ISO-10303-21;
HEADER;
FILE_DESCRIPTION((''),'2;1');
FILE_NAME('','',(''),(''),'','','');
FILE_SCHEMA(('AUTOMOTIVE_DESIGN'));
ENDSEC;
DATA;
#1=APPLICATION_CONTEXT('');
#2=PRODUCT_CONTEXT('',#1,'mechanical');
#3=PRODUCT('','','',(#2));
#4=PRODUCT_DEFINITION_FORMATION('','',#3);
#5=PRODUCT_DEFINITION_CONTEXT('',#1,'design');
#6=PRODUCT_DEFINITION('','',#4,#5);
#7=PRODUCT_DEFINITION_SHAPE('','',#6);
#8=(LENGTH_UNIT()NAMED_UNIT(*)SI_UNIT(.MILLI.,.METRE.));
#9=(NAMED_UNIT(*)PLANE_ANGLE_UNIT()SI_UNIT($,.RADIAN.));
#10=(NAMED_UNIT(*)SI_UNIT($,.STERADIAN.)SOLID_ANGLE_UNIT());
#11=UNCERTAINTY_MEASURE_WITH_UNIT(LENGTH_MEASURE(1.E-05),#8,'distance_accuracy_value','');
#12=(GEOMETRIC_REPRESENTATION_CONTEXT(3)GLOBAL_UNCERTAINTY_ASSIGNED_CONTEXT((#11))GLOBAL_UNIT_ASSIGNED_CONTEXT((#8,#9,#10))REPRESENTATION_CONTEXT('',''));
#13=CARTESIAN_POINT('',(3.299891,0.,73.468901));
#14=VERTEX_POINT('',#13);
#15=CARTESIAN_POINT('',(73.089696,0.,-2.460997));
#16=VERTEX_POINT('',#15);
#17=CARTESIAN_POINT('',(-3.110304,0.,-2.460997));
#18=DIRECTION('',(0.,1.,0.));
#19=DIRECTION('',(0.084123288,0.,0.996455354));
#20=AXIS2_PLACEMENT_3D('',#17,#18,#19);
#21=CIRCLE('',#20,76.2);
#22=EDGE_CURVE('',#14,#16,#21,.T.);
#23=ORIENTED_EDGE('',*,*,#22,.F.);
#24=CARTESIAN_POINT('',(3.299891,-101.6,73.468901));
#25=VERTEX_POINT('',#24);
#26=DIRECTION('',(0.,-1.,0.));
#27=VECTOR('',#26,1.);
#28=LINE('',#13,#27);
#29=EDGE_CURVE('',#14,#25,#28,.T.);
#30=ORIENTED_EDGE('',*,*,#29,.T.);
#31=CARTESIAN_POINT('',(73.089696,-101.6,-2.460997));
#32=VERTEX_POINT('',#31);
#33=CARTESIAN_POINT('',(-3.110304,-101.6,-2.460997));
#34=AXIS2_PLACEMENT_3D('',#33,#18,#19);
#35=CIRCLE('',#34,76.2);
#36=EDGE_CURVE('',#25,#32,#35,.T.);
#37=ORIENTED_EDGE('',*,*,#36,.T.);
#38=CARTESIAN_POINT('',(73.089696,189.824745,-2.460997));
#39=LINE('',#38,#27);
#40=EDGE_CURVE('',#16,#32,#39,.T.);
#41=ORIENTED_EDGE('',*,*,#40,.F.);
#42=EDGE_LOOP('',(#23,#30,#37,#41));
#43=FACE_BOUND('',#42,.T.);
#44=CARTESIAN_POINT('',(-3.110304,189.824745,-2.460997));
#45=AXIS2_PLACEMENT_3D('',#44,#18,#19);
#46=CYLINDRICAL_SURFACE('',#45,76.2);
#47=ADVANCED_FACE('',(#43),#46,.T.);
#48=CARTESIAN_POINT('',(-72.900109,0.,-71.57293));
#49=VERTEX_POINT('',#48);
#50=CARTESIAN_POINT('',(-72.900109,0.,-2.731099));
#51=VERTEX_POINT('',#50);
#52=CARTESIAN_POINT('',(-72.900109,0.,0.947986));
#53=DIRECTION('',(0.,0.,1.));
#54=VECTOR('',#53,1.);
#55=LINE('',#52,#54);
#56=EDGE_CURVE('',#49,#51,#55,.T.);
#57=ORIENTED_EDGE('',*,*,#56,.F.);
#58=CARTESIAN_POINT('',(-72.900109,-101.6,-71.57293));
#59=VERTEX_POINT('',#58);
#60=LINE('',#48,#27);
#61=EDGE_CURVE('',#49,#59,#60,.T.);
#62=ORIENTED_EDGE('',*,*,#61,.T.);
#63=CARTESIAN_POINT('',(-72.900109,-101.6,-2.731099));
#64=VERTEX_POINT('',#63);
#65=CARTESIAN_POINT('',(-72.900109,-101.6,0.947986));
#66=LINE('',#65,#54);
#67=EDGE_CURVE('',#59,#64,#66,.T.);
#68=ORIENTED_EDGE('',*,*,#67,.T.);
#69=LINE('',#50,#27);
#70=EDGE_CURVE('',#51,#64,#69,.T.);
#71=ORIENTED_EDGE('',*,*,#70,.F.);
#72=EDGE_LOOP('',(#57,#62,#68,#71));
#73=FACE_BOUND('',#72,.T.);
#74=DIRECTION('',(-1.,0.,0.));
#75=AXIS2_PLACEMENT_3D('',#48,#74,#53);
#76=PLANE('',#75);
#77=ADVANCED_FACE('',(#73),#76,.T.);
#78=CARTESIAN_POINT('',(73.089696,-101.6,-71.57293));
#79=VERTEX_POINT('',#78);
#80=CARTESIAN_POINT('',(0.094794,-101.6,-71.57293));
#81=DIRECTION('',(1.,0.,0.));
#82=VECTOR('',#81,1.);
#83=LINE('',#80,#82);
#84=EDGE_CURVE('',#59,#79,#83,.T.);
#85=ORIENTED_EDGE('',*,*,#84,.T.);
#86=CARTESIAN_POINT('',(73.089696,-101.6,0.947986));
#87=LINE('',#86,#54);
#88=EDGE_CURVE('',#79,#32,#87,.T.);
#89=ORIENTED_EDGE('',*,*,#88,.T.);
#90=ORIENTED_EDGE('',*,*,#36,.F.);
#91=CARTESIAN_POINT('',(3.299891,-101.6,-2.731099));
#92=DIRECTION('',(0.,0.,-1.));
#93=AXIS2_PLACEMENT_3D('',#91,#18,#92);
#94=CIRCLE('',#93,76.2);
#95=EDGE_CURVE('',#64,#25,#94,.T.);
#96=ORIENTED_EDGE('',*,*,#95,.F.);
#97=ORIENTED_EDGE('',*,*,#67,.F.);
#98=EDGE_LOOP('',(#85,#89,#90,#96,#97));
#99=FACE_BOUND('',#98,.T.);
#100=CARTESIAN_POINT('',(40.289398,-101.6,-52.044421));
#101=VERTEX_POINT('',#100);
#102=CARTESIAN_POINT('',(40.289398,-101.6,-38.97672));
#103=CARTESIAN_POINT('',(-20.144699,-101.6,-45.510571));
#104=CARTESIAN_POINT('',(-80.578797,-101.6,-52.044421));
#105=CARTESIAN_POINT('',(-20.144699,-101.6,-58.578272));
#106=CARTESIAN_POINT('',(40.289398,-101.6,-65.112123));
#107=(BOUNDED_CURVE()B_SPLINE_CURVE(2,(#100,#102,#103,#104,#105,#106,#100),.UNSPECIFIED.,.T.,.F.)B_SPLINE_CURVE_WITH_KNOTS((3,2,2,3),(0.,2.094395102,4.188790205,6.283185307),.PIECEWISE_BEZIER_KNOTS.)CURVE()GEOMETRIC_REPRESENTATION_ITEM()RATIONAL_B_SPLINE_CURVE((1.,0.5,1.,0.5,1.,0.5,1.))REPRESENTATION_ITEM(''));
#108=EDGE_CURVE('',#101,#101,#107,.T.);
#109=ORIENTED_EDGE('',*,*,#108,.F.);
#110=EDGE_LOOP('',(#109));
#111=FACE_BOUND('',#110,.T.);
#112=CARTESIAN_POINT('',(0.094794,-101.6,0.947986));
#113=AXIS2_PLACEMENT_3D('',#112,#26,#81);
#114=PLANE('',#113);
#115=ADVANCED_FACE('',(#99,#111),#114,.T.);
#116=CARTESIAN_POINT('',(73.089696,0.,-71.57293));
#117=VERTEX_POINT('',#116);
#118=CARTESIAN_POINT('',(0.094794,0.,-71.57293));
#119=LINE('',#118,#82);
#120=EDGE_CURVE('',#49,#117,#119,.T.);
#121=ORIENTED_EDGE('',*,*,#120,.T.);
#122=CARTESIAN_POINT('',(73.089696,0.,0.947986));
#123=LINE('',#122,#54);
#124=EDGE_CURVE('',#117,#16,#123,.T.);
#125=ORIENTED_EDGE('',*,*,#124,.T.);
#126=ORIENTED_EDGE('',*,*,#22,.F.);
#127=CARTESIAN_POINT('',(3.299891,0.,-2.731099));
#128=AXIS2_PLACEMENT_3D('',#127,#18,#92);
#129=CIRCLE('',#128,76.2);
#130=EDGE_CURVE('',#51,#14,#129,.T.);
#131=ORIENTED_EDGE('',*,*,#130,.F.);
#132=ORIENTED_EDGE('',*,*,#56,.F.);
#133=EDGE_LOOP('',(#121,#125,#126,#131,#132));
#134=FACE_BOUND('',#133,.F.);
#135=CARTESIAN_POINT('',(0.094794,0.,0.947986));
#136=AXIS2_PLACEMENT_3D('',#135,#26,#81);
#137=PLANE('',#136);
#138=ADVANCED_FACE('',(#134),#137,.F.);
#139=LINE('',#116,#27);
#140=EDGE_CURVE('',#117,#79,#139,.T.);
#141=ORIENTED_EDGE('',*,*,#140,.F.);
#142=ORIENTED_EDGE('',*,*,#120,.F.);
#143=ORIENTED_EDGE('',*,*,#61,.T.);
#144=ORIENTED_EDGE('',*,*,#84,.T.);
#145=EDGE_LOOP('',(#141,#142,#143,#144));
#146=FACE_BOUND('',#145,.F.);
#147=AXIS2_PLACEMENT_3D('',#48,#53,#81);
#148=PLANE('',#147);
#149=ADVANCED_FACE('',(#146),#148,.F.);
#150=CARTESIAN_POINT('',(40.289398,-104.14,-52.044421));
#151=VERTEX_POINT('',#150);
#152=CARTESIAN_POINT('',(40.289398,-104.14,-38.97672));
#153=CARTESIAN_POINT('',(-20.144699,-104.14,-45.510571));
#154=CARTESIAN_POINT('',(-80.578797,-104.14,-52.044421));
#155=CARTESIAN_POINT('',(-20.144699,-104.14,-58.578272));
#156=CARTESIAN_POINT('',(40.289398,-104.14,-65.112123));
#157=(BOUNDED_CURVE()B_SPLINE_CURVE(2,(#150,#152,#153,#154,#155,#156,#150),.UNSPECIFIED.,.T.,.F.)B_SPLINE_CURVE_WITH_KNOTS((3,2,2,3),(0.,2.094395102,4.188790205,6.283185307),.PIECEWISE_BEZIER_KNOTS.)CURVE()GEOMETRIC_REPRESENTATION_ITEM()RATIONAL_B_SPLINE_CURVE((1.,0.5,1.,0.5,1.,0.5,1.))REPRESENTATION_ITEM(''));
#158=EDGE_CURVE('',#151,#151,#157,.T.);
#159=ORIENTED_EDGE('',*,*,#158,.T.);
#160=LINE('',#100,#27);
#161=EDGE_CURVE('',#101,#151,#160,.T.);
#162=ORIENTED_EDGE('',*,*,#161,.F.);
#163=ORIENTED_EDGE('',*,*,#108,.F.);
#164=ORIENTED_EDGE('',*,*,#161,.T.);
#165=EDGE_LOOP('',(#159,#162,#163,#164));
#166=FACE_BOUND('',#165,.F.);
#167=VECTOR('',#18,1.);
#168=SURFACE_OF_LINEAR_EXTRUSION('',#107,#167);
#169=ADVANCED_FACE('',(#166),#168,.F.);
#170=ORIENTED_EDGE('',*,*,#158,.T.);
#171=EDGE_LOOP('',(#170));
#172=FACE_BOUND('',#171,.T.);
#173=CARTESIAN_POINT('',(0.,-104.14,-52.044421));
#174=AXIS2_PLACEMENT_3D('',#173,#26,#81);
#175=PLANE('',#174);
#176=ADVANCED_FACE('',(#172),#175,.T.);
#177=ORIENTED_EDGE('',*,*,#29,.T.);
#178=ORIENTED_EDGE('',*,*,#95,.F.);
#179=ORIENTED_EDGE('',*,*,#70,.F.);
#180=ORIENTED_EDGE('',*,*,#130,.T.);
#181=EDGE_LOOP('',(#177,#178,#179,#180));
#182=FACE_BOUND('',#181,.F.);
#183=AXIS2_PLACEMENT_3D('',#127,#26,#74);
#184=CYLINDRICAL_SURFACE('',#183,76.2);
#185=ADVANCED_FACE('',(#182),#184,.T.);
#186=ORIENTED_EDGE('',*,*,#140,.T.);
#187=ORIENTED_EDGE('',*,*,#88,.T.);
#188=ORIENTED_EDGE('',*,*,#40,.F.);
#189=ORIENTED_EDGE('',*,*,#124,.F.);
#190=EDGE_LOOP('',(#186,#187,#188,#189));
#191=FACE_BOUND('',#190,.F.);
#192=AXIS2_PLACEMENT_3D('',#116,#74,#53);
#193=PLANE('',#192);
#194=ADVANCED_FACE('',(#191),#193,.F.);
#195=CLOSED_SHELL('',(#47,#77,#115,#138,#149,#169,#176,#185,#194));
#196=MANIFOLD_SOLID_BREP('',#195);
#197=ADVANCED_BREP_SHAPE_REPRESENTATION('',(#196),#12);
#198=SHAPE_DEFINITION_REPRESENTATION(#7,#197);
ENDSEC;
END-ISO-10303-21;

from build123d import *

# Parameters (mm, degrees)
F0_W        = 145.98980546
F0_H        = 145.0418308377
F1_DEPTH    = 101.6
F2_R        = 76.2
F3_T1_DEPTH = 481.2494898574
F5_DEPTH    = 2.54


# Not quite as in the source:
# - a fillet or chamfer that OpenCascade refuses, or shapes differently, is made with other operations: its cross-section is extruded or revolved along the edge and cut away or added


with BuildPart() as f1:
    # F0 (on Front) → F1 (new body)
    with BuildSketch(Plane.XZ):
        with Locations((0.0947937369, 0.9479857981)):
            Rectangle(F0_W, F0_H)
    extrude(amount=F1_DEPTH)

    # F2
    f2_edges = [f1.edges().sort_by_distance(p)[0] for p in [
        (-72.900109, -50.8, 73.468901),
    ]]
    fillet(f2_edges, radius=F2_R)

    # F3: fillet of radius 76.2 on 1 edges, made by hand

    # F3_s2 → F3_t1 (cut)
    with BuildSketch(Plane.XZ.offset(-189.8247449287)):
        with BuildLine():
            ThreePointArc((3.2998910069, 73.468901217), (52.9918213106, 49.1044140169), (73.0896964669, -2.4609967545))
            Line((73.0896964669, -2.4609967545), (73.0896964669, 73.468901217))
            Line((73.0896964669, 73.468901217), (3.2998910069, 73.468901217))
        make_face()
    extrude(amount=F3_T1_DEPTH, mode=Mode.SUBTRACT)

    # F4 (on face) → F5 (join)
    with BuildSketch(Plane.XZ.offset(101.6)):
        with BuildLine():
            add(Edge.make_bspline(
                [(40.2893982828, -52.0444214344), (40.2893982828, -38.976719833), (-20.1446991414, -45.5105706337), (-80.5787965655, -52.0444214344), (-20.1446991414, -58.5782722351), (40.2893982828, -65.1121230358), (40.2893982828, -52.0444214344)],
                knots=[0, 0, 0, 2.0943951024, 2.0943951024, 4.1887902048, 4.1887902048, 6.2831853072, 6.2831853072, 6.2831853072], degree=2, weights=[1, 0.5, 1, 0.5, 1, 0.5, 1]))
        make_face()
    extrude(amount=F5_DEPTH)


solid = f1.part
